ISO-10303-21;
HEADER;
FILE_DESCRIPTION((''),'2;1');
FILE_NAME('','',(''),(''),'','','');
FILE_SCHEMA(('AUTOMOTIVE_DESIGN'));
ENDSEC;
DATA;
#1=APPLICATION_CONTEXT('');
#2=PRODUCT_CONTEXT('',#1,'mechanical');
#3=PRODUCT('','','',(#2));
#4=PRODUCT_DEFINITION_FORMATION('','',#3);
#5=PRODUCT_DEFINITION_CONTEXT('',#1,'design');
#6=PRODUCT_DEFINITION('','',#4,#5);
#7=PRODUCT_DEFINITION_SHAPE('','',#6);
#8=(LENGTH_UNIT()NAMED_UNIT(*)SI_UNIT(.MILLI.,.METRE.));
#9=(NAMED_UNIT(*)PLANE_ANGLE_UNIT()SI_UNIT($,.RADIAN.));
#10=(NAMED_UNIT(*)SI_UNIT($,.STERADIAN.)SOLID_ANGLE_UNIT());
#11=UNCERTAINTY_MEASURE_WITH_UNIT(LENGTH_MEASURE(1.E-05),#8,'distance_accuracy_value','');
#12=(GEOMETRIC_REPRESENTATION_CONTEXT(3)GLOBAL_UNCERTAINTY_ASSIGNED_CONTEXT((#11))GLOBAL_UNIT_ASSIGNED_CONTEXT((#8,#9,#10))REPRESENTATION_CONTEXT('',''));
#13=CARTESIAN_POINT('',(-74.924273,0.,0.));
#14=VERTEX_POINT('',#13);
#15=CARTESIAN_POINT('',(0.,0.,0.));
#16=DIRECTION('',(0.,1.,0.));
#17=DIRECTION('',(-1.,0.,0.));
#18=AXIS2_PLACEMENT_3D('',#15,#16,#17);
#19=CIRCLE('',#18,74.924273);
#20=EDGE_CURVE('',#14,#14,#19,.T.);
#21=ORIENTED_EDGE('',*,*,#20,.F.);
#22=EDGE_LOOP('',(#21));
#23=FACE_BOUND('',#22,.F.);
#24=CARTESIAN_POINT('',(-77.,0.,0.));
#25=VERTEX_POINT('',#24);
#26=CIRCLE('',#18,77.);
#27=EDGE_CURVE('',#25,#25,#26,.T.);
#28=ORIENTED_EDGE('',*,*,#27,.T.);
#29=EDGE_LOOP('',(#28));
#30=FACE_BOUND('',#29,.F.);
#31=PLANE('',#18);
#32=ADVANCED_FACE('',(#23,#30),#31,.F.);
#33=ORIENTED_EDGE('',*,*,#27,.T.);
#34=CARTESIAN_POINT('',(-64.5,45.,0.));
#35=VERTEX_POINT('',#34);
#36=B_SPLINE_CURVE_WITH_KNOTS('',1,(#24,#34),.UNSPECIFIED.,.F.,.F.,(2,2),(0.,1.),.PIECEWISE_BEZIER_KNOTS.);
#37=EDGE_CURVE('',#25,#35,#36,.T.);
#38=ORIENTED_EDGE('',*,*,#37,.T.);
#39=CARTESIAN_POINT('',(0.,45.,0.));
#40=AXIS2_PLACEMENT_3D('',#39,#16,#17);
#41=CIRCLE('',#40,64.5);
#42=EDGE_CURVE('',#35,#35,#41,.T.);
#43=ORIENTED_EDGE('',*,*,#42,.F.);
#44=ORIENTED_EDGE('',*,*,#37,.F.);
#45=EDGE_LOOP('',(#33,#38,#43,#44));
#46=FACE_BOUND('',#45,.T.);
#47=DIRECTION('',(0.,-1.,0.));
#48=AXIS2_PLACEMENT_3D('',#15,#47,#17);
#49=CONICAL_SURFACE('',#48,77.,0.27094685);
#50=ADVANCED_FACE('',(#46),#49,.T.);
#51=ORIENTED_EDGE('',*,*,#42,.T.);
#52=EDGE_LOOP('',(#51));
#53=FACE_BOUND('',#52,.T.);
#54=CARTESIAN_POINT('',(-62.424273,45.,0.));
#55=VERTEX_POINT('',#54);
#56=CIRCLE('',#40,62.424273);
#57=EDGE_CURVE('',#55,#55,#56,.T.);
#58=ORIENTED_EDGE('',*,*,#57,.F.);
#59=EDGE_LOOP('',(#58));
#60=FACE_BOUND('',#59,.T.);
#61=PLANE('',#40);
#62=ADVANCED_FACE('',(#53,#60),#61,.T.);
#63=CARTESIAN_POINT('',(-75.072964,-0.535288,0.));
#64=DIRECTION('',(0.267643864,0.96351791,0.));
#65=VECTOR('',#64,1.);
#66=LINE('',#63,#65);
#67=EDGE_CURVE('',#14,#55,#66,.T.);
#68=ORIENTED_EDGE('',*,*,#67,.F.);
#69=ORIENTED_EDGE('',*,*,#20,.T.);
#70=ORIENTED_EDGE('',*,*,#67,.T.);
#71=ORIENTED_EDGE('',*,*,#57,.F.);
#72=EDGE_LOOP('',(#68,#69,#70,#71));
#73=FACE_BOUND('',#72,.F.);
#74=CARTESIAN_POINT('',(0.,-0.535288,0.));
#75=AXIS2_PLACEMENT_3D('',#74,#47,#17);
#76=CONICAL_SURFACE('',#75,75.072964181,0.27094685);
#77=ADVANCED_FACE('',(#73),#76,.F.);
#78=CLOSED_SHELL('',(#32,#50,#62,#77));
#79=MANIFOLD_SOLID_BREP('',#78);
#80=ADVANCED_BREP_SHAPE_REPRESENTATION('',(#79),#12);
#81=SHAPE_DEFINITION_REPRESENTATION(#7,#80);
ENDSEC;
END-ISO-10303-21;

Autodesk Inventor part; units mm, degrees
ref_plane "YZ Plane" through (0, 0, 0) normal (1, 0, 0) x (0, 1, 0)
ref_plane "XY Plane" through (0, 0, 0) normal (0, 0, 1) x (1, 0, 0)
sketch "Szkic6" plane through (0, 0, 0) normal (0, 1, 0) x (-1, 0, 0)
  circle A0 centre (0, 0) radius 77
  dimension "d33" = 154
ref_plane "Płaszczyzna konstrukcyjna1" through (0, 45, 0) normal (0, 1, 0) x (-1, 0, 0)
sketch "Szkic7" plane through (0, 45, 0) normal (0, 1, 0) x (-1, 0, 0)
  circle A0 centre (0, 0) radius 64.5
  dimension "d35" = 129
loft "Wyciągnięcie złożone1" add profiles "Szkic6", "Szkic7"
shell "Skorupa1" thickness 2 removed faces 2 at (8.6004, 45, -5.9504) at (-23.2587, 0, 21.3864)
equation "\"d33\" = OD1"
equation "\"d35\" = OD2"
equation "\"d52\" = THK"
equation "\"SzerokośćGięciaPodcięcia\" = Grubość"
equation "\"RozmiarPodcięciaNarożnika\" = 4 * Grubość"
equation "\"PromieńPrzejścia\" = PromieńGięcia"
equation "\"Rozmiar_promienia_Jacobiego\" = PromieńGięcia"
equation "\"Wielk_odstępu\" = Grubość"
equation "\"d2\" = PromieńGięcia"
equation "\"d23\" = PromieńGięcia"
equation "\"OD1\" = 154"
equation "\"OD2\" = 129"
equation "\"L\" = 45"
equation "\"THK\" = 2"
equation "\"d34\" = L"
equation "\"Grubość\" = 1.5"
equation "\"PromieńGięcia\" = 3"
properties part number "Redukcja symetryczna Ø154x129x2 L=45" material "304"
